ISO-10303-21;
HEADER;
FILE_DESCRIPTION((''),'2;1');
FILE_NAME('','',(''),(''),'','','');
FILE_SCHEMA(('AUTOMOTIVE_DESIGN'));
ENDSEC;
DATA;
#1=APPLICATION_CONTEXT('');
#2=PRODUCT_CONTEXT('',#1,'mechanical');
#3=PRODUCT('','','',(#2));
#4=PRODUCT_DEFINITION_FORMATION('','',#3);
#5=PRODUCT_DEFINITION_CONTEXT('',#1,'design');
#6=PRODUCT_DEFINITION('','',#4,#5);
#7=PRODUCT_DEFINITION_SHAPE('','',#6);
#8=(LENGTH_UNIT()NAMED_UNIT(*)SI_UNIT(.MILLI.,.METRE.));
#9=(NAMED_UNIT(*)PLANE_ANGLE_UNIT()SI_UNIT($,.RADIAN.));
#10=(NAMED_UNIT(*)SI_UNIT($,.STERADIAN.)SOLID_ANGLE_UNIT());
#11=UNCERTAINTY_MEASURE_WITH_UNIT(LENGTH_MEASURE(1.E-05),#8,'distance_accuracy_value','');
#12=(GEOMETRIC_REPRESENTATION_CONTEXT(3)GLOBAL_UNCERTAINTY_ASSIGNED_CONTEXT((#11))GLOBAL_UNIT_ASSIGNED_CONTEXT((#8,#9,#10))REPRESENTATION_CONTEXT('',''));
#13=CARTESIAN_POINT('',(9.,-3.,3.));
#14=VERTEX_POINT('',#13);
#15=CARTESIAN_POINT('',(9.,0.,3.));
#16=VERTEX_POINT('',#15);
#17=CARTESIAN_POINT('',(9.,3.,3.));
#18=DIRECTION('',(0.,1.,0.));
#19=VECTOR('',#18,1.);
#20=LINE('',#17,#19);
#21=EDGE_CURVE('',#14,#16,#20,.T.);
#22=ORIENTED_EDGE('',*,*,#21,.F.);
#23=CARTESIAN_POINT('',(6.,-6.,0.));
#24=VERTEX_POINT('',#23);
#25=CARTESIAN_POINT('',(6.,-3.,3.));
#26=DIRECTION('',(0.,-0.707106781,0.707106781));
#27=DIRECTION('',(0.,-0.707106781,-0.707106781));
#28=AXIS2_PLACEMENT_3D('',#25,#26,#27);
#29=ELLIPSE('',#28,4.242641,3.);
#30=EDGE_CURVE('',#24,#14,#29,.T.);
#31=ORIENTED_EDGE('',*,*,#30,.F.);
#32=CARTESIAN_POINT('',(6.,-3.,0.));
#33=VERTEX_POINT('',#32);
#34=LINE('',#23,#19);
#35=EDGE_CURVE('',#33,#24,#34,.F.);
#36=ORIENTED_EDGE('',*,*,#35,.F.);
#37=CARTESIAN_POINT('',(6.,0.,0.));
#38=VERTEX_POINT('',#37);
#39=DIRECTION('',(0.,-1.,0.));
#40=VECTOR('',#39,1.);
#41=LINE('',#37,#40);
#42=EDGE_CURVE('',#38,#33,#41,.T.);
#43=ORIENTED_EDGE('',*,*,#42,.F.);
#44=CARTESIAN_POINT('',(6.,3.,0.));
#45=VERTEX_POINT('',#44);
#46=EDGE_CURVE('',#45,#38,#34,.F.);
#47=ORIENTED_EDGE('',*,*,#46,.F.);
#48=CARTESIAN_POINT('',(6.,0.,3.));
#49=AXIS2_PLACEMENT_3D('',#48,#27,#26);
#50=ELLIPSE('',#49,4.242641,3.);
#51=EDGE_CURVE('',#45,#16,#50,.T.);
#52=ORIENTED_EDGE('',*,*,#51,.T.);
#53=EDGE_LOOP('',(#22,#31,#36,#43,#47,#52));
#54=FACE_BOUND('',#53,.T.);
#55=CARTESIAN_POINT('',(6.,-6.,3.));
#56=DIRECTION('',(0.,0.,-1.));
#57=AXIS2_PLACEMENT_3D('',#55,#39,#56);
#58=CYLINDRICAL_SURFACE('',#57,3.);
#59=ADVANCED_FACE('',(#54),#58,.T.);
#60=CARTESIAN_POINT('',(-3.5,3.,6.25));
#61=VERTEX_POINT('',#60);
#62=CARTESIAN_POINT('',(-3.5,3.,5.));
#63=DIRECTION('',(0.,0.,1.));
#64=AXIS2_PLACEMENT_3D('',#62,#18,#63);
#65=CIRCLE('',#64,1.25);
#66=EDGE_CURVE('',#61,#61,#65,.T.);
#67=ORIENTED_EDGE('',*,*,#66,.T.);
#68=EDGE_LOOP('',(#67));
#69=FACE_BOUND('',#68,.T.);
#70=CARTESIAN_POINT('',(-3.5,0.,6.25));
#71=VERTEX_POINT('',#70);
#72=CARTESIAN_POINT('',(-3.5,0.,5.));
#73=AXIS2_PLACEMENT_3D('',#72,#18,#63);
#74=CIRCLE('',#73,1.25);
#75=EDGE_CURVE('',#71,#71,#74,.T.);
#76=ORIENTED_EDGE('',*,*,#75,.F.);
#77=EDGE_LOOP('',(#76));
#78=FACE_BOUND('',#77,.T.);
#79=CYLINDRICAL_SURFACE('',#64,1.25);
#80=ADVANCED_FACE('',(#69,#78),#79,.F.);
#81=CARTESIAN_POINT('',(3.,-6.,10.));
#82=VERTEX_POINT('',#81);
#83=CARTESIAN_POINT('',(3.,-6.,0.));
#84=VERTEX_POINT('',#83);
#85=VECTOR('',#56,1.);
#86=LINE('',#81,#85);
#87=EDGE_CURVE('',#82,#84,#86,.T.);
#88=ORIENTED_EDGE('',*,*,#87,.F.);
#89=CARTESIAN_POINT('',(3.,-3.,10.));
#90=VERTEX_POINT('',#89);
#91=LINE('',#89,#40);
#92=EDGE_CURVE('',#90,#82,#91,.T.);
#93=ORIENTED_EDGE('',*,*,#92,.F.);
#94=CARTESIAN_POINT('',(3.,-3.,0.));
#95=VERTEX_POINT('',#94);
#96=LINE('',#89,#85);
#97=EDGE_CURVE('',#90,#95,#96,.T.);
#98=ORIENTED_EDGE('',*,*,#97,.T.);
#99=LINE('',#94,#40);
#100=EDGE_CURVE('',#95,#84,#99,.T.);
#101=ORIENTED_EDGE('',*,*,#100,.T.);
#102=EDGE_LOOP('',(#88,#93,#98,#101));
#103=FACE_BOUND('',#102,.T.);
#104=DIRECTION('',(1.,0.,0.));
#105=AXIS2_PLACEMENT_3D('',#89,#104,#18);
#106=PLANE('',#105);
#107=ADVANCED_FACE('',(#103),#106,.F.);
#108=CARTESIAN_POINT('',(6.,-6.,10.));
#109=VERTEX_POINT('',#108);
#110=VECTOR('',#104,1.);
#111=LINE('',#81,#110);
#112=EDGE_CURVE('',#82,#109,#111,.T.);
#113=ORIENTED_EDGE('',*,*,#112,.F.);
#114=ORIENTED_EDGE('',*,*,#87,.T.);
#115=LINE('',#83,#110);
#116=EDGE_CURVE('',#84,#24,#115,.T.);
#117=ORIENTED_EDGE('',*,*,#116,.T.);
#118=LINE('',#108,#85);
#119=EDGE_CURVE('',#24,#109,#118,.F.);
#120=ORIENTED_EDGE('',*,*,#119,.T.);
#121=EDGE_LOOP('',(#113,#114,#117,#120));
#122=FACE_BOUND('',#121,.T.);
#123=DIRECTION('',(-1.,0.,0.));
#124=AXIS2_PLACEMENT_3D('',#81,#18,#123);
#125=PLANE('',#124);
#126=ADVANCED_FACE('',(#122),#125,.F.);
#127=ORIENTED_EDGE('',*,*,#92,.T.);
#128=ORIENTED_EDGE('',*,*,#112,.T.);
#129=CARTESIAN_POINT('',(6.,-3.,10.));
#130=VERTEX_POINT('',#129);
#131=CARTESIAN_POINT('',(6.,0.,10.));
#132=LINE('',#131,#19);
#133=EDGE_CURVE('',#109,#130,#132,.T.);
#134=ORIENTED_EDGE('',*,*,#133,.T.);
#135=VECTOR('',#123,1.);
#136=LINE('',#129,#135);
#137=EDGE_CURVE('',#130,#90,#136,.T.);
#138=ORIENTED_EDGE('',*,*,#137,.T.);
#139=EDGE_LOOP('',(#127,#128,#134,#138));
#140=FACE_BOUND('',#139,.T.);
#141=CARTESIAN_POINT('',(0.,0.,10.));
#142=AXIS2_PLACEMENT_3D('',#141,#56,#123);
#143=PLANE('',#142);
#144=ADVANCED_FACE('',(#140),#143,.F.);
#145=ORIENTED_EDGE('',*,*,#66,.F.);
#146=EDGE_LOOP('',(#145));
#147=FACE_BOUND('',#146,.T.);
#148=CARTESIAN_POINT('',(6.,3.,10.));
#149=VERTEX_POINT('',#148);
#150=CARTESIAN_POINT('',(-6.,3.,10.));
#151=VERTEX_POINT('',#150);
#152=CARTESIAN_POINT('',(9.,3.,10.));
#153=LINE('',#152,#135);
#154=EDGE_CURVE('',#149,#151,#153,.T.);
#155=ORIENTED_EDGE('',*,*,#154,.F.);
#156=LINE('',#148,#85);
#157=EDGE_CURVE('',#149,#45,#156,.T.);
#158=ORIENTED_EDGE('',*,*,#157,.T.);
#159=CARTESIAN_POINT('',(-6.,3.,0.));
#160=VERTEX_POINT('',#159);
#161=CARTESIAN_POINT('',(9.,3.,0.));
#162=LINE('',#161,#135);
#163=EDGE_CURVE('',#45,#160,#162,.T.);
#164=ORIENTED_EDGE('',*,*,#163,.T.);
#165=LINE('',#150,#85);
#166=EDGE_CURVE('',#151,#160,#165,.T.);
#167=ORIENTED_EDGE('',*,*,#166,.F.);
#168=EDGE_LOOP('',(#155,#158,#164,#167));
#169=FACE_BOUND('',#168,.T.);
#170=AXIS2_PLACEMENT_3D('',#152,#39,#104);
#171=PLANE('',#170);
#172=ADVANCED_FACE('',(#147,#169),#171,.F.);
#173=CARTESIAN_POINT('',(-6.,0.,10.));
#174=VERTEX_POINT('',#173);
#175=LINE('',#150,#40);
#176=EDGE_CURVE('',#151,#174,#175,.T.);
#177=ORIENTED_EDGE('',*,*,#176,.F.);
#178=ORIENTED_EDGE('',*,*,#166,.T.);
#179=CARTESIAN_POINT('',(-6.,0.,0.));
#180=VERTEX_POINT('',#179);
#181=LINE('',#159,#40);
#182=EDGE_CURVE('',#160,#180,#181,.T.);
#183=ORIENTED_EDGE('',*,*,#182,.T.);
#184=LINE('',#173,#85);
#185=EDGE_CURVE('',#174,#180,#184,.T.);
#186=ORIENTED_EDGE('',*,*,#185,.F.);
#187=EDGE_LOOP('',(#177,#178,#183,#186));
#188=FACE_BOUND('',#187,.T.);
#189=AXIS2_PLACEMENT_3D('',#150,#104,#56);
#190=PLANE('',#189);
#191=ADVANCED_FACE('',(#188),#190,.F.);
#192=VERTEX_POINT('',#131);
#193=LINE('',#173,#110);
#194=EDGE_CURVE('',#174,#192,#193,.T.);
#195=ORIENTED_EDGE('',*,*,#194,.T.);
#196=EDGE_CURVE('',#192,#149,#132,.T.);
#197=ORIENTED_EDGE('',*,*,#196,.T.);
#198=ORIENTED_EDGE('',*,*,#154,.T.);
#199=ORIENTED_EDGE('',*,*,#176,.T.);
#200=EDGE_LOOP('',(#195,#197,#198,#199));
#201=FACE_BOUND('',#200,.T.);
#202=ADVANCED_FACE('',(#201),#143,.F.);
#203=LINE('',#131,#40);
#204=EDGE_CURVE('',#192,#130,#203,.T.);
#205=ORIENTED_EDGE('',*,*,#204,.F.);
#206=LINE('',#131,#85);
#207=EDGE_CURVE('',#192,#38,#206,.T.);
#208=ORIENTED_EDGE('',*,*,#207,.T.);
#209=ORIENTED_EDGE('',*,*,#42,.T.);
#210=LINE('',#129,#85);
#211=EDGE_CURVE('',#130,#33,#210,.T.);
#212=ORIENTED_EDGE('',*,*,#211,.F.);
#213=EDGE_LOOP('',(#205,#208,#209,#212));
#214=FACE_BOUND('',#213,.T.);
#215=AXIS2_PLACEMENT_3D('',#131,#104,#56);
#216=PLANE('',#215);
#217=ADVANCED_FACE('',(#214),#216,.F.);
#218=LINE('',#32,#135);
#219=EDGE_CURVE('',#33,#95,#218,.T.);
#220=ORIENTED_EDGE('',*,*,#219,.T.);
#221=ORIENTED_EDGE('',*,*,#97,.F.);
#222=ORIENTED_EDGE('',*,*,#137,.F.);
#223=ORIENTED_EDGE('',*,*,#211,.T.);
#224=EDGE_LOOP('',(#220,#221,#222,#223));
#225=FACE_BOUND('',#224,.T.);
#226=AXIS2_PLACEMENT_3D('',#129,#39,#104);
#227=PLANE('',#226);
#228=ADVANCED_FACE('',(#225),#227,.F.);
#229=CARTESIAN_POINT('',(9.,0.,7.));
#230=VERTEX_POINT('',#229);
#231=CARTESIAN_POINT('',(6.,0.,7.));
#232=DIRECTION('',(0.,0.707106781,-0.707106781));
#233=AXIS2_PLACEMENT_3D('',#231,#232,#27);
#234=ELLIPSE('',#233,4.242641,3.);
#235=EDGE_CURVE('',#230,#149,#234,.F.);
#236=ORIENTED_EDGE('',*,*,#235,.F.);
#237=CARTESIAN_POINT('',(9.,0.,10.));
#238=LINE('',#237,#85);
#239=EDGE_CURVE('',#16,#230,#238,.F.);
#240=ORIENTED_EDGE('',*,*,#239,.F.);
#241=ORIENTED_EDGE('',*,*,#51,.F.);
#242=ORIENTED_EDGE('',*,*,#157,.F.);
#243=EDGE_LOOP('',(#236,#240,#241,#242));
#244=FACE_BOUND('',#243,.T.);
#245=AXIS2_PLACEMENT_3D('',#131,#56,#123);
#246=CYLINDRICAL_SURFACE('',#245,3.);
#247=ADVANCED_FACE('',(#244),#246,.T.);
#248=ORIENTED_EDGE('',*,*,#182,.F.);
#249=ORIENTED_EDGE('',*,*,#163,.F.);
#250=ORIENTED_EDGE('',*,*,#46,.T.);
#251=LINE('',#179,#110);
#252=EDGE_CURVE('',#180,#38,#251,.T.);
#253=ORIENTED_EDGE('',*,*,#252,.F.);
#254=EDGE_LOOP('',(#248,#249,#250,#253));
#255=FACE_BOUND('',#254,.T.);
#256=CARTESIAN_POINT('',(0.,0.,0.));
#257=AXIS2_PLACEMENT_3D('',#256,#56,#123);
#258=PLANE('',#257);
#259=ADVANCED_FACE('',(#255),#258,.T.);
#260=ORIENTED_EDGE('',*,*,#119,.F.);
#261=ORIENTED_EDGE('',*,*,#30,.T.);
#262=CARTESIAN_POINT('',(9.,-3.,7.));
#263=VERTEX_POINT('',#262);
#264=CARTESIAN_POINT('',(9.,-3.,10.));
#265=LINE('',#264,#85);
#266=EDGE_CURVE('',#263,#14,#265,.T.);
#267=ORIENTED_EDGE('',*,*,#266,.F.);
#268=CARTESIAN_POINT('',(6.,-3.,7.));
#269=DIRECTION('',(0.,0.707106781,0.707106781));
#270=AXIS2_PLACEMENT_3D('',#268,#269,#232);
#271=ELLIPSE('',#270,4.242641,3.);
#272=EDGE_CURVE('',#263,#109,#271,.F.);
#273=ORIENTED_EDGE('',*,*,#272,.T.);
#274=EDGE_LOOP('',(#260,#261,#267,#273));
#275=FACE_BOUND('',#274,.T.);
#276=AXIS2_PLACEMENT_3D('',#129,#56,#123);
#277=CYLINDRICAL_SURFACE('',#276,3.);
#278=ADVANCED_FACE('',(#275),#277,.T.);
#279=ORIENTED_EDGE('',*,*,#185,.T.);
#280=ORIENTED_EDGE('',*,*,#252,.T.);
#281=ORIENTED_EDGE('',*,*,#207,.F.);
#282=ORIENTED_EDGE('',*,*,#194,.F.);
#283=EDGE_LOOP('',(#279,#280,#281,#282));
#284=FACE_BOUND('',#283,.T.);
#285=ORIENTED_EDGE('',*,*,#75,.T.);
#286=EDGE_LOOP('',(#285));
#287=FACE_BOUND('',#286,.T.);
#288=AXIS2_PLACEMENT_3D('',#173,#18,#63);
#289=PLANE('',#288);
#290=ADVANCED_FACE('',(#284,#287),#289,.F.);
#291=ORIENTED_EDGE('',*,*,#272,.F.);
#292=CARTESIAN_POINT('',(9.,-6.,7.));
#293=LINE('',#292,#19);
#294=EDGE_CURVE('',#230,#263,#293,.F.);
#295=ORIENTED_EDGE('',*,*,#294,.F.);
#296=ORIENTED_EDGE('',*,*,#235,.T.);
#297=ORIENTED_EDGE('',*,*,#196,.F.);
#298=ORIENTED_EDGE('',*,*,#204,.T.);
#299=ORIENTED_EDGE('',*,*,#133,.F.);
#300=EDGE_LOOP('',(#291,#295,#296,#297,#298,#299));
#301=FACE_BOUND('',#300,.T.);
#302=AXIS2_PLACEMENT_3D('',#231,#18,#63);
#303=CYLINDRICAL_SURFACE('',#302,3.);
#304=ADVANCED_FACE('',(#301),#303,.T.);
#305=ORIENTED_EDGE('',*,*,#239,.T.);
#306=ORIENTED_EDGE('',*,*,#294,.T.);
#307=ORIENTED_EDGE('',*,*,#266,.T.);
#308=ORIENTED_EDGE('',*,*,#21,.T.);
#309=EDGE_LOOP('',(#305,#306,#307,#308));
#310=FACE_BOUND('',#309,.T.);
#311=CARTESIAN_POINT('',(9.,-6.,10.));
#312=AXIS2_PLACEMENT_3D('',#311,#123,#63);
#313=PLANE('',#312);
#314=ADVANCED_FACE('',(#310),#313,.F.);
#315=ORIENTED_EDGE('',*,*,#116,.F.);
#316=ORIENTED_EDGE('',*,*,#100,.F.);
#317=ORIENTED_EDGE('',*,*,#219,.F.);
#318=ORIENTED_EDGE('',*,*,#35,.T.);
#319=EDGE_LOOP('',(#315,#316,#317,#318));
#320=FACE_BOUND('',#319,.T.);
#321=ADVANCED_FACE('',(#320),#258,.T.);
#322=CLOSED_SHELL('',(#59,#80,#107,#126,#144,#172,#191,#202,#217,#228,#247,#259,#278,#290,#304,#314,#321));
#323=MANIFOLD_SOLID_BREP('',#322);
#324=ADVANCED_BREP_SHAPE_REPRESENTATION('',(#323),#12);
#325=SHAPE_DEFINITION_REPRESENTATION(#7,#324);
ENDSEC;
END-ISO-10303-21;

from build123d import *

# Parameters (mm, degrees)
ESTRUSIONE_ESTRUSIONE1_DEPTH = 10
RACCORDO1_R                  = 3
FORO_FILETTATO_M3X0_5_1_D    = 2.5


with BuildPart() as part:
    # Schizzo1 → Estrusione-Estrusione1 (new body)
    with BuildSketch(Plane.XY):
        Polygon((-6, 0), (6, 0), (6, -3), (3, -3), (3, -6), (9, -6), (9, 3), (-6, 3), align=None)
    extrude(amount=ESTRUSIONE_ESTRUSIONE1_DEPTH)

    # Raccordo1
    raccordo1_edges = [part.edges().sort_by_distance(p)[0] for p in [
        (9, 3, 5),
        (9, -6, 5),
        (9, -1.5, 10),
        (9, -1.5, 0),
    ]]
    fillet(raccordo1_edges, radius=RACCORDO1_R - 0.0001)  # a hair under: the kernel refuses the full size

    # Foro filettato M3x0.5-1 (through all)
    with Locations(Plane(origin=(0, 3, 0), x_dir=(1, 0, 0), z_dir=(0, 1, 0))):
        with Locations((-3.5, -5)):
            Hole(FORO_FILETTATO_M3X0_5_1_D / 2)


solid = part.part
